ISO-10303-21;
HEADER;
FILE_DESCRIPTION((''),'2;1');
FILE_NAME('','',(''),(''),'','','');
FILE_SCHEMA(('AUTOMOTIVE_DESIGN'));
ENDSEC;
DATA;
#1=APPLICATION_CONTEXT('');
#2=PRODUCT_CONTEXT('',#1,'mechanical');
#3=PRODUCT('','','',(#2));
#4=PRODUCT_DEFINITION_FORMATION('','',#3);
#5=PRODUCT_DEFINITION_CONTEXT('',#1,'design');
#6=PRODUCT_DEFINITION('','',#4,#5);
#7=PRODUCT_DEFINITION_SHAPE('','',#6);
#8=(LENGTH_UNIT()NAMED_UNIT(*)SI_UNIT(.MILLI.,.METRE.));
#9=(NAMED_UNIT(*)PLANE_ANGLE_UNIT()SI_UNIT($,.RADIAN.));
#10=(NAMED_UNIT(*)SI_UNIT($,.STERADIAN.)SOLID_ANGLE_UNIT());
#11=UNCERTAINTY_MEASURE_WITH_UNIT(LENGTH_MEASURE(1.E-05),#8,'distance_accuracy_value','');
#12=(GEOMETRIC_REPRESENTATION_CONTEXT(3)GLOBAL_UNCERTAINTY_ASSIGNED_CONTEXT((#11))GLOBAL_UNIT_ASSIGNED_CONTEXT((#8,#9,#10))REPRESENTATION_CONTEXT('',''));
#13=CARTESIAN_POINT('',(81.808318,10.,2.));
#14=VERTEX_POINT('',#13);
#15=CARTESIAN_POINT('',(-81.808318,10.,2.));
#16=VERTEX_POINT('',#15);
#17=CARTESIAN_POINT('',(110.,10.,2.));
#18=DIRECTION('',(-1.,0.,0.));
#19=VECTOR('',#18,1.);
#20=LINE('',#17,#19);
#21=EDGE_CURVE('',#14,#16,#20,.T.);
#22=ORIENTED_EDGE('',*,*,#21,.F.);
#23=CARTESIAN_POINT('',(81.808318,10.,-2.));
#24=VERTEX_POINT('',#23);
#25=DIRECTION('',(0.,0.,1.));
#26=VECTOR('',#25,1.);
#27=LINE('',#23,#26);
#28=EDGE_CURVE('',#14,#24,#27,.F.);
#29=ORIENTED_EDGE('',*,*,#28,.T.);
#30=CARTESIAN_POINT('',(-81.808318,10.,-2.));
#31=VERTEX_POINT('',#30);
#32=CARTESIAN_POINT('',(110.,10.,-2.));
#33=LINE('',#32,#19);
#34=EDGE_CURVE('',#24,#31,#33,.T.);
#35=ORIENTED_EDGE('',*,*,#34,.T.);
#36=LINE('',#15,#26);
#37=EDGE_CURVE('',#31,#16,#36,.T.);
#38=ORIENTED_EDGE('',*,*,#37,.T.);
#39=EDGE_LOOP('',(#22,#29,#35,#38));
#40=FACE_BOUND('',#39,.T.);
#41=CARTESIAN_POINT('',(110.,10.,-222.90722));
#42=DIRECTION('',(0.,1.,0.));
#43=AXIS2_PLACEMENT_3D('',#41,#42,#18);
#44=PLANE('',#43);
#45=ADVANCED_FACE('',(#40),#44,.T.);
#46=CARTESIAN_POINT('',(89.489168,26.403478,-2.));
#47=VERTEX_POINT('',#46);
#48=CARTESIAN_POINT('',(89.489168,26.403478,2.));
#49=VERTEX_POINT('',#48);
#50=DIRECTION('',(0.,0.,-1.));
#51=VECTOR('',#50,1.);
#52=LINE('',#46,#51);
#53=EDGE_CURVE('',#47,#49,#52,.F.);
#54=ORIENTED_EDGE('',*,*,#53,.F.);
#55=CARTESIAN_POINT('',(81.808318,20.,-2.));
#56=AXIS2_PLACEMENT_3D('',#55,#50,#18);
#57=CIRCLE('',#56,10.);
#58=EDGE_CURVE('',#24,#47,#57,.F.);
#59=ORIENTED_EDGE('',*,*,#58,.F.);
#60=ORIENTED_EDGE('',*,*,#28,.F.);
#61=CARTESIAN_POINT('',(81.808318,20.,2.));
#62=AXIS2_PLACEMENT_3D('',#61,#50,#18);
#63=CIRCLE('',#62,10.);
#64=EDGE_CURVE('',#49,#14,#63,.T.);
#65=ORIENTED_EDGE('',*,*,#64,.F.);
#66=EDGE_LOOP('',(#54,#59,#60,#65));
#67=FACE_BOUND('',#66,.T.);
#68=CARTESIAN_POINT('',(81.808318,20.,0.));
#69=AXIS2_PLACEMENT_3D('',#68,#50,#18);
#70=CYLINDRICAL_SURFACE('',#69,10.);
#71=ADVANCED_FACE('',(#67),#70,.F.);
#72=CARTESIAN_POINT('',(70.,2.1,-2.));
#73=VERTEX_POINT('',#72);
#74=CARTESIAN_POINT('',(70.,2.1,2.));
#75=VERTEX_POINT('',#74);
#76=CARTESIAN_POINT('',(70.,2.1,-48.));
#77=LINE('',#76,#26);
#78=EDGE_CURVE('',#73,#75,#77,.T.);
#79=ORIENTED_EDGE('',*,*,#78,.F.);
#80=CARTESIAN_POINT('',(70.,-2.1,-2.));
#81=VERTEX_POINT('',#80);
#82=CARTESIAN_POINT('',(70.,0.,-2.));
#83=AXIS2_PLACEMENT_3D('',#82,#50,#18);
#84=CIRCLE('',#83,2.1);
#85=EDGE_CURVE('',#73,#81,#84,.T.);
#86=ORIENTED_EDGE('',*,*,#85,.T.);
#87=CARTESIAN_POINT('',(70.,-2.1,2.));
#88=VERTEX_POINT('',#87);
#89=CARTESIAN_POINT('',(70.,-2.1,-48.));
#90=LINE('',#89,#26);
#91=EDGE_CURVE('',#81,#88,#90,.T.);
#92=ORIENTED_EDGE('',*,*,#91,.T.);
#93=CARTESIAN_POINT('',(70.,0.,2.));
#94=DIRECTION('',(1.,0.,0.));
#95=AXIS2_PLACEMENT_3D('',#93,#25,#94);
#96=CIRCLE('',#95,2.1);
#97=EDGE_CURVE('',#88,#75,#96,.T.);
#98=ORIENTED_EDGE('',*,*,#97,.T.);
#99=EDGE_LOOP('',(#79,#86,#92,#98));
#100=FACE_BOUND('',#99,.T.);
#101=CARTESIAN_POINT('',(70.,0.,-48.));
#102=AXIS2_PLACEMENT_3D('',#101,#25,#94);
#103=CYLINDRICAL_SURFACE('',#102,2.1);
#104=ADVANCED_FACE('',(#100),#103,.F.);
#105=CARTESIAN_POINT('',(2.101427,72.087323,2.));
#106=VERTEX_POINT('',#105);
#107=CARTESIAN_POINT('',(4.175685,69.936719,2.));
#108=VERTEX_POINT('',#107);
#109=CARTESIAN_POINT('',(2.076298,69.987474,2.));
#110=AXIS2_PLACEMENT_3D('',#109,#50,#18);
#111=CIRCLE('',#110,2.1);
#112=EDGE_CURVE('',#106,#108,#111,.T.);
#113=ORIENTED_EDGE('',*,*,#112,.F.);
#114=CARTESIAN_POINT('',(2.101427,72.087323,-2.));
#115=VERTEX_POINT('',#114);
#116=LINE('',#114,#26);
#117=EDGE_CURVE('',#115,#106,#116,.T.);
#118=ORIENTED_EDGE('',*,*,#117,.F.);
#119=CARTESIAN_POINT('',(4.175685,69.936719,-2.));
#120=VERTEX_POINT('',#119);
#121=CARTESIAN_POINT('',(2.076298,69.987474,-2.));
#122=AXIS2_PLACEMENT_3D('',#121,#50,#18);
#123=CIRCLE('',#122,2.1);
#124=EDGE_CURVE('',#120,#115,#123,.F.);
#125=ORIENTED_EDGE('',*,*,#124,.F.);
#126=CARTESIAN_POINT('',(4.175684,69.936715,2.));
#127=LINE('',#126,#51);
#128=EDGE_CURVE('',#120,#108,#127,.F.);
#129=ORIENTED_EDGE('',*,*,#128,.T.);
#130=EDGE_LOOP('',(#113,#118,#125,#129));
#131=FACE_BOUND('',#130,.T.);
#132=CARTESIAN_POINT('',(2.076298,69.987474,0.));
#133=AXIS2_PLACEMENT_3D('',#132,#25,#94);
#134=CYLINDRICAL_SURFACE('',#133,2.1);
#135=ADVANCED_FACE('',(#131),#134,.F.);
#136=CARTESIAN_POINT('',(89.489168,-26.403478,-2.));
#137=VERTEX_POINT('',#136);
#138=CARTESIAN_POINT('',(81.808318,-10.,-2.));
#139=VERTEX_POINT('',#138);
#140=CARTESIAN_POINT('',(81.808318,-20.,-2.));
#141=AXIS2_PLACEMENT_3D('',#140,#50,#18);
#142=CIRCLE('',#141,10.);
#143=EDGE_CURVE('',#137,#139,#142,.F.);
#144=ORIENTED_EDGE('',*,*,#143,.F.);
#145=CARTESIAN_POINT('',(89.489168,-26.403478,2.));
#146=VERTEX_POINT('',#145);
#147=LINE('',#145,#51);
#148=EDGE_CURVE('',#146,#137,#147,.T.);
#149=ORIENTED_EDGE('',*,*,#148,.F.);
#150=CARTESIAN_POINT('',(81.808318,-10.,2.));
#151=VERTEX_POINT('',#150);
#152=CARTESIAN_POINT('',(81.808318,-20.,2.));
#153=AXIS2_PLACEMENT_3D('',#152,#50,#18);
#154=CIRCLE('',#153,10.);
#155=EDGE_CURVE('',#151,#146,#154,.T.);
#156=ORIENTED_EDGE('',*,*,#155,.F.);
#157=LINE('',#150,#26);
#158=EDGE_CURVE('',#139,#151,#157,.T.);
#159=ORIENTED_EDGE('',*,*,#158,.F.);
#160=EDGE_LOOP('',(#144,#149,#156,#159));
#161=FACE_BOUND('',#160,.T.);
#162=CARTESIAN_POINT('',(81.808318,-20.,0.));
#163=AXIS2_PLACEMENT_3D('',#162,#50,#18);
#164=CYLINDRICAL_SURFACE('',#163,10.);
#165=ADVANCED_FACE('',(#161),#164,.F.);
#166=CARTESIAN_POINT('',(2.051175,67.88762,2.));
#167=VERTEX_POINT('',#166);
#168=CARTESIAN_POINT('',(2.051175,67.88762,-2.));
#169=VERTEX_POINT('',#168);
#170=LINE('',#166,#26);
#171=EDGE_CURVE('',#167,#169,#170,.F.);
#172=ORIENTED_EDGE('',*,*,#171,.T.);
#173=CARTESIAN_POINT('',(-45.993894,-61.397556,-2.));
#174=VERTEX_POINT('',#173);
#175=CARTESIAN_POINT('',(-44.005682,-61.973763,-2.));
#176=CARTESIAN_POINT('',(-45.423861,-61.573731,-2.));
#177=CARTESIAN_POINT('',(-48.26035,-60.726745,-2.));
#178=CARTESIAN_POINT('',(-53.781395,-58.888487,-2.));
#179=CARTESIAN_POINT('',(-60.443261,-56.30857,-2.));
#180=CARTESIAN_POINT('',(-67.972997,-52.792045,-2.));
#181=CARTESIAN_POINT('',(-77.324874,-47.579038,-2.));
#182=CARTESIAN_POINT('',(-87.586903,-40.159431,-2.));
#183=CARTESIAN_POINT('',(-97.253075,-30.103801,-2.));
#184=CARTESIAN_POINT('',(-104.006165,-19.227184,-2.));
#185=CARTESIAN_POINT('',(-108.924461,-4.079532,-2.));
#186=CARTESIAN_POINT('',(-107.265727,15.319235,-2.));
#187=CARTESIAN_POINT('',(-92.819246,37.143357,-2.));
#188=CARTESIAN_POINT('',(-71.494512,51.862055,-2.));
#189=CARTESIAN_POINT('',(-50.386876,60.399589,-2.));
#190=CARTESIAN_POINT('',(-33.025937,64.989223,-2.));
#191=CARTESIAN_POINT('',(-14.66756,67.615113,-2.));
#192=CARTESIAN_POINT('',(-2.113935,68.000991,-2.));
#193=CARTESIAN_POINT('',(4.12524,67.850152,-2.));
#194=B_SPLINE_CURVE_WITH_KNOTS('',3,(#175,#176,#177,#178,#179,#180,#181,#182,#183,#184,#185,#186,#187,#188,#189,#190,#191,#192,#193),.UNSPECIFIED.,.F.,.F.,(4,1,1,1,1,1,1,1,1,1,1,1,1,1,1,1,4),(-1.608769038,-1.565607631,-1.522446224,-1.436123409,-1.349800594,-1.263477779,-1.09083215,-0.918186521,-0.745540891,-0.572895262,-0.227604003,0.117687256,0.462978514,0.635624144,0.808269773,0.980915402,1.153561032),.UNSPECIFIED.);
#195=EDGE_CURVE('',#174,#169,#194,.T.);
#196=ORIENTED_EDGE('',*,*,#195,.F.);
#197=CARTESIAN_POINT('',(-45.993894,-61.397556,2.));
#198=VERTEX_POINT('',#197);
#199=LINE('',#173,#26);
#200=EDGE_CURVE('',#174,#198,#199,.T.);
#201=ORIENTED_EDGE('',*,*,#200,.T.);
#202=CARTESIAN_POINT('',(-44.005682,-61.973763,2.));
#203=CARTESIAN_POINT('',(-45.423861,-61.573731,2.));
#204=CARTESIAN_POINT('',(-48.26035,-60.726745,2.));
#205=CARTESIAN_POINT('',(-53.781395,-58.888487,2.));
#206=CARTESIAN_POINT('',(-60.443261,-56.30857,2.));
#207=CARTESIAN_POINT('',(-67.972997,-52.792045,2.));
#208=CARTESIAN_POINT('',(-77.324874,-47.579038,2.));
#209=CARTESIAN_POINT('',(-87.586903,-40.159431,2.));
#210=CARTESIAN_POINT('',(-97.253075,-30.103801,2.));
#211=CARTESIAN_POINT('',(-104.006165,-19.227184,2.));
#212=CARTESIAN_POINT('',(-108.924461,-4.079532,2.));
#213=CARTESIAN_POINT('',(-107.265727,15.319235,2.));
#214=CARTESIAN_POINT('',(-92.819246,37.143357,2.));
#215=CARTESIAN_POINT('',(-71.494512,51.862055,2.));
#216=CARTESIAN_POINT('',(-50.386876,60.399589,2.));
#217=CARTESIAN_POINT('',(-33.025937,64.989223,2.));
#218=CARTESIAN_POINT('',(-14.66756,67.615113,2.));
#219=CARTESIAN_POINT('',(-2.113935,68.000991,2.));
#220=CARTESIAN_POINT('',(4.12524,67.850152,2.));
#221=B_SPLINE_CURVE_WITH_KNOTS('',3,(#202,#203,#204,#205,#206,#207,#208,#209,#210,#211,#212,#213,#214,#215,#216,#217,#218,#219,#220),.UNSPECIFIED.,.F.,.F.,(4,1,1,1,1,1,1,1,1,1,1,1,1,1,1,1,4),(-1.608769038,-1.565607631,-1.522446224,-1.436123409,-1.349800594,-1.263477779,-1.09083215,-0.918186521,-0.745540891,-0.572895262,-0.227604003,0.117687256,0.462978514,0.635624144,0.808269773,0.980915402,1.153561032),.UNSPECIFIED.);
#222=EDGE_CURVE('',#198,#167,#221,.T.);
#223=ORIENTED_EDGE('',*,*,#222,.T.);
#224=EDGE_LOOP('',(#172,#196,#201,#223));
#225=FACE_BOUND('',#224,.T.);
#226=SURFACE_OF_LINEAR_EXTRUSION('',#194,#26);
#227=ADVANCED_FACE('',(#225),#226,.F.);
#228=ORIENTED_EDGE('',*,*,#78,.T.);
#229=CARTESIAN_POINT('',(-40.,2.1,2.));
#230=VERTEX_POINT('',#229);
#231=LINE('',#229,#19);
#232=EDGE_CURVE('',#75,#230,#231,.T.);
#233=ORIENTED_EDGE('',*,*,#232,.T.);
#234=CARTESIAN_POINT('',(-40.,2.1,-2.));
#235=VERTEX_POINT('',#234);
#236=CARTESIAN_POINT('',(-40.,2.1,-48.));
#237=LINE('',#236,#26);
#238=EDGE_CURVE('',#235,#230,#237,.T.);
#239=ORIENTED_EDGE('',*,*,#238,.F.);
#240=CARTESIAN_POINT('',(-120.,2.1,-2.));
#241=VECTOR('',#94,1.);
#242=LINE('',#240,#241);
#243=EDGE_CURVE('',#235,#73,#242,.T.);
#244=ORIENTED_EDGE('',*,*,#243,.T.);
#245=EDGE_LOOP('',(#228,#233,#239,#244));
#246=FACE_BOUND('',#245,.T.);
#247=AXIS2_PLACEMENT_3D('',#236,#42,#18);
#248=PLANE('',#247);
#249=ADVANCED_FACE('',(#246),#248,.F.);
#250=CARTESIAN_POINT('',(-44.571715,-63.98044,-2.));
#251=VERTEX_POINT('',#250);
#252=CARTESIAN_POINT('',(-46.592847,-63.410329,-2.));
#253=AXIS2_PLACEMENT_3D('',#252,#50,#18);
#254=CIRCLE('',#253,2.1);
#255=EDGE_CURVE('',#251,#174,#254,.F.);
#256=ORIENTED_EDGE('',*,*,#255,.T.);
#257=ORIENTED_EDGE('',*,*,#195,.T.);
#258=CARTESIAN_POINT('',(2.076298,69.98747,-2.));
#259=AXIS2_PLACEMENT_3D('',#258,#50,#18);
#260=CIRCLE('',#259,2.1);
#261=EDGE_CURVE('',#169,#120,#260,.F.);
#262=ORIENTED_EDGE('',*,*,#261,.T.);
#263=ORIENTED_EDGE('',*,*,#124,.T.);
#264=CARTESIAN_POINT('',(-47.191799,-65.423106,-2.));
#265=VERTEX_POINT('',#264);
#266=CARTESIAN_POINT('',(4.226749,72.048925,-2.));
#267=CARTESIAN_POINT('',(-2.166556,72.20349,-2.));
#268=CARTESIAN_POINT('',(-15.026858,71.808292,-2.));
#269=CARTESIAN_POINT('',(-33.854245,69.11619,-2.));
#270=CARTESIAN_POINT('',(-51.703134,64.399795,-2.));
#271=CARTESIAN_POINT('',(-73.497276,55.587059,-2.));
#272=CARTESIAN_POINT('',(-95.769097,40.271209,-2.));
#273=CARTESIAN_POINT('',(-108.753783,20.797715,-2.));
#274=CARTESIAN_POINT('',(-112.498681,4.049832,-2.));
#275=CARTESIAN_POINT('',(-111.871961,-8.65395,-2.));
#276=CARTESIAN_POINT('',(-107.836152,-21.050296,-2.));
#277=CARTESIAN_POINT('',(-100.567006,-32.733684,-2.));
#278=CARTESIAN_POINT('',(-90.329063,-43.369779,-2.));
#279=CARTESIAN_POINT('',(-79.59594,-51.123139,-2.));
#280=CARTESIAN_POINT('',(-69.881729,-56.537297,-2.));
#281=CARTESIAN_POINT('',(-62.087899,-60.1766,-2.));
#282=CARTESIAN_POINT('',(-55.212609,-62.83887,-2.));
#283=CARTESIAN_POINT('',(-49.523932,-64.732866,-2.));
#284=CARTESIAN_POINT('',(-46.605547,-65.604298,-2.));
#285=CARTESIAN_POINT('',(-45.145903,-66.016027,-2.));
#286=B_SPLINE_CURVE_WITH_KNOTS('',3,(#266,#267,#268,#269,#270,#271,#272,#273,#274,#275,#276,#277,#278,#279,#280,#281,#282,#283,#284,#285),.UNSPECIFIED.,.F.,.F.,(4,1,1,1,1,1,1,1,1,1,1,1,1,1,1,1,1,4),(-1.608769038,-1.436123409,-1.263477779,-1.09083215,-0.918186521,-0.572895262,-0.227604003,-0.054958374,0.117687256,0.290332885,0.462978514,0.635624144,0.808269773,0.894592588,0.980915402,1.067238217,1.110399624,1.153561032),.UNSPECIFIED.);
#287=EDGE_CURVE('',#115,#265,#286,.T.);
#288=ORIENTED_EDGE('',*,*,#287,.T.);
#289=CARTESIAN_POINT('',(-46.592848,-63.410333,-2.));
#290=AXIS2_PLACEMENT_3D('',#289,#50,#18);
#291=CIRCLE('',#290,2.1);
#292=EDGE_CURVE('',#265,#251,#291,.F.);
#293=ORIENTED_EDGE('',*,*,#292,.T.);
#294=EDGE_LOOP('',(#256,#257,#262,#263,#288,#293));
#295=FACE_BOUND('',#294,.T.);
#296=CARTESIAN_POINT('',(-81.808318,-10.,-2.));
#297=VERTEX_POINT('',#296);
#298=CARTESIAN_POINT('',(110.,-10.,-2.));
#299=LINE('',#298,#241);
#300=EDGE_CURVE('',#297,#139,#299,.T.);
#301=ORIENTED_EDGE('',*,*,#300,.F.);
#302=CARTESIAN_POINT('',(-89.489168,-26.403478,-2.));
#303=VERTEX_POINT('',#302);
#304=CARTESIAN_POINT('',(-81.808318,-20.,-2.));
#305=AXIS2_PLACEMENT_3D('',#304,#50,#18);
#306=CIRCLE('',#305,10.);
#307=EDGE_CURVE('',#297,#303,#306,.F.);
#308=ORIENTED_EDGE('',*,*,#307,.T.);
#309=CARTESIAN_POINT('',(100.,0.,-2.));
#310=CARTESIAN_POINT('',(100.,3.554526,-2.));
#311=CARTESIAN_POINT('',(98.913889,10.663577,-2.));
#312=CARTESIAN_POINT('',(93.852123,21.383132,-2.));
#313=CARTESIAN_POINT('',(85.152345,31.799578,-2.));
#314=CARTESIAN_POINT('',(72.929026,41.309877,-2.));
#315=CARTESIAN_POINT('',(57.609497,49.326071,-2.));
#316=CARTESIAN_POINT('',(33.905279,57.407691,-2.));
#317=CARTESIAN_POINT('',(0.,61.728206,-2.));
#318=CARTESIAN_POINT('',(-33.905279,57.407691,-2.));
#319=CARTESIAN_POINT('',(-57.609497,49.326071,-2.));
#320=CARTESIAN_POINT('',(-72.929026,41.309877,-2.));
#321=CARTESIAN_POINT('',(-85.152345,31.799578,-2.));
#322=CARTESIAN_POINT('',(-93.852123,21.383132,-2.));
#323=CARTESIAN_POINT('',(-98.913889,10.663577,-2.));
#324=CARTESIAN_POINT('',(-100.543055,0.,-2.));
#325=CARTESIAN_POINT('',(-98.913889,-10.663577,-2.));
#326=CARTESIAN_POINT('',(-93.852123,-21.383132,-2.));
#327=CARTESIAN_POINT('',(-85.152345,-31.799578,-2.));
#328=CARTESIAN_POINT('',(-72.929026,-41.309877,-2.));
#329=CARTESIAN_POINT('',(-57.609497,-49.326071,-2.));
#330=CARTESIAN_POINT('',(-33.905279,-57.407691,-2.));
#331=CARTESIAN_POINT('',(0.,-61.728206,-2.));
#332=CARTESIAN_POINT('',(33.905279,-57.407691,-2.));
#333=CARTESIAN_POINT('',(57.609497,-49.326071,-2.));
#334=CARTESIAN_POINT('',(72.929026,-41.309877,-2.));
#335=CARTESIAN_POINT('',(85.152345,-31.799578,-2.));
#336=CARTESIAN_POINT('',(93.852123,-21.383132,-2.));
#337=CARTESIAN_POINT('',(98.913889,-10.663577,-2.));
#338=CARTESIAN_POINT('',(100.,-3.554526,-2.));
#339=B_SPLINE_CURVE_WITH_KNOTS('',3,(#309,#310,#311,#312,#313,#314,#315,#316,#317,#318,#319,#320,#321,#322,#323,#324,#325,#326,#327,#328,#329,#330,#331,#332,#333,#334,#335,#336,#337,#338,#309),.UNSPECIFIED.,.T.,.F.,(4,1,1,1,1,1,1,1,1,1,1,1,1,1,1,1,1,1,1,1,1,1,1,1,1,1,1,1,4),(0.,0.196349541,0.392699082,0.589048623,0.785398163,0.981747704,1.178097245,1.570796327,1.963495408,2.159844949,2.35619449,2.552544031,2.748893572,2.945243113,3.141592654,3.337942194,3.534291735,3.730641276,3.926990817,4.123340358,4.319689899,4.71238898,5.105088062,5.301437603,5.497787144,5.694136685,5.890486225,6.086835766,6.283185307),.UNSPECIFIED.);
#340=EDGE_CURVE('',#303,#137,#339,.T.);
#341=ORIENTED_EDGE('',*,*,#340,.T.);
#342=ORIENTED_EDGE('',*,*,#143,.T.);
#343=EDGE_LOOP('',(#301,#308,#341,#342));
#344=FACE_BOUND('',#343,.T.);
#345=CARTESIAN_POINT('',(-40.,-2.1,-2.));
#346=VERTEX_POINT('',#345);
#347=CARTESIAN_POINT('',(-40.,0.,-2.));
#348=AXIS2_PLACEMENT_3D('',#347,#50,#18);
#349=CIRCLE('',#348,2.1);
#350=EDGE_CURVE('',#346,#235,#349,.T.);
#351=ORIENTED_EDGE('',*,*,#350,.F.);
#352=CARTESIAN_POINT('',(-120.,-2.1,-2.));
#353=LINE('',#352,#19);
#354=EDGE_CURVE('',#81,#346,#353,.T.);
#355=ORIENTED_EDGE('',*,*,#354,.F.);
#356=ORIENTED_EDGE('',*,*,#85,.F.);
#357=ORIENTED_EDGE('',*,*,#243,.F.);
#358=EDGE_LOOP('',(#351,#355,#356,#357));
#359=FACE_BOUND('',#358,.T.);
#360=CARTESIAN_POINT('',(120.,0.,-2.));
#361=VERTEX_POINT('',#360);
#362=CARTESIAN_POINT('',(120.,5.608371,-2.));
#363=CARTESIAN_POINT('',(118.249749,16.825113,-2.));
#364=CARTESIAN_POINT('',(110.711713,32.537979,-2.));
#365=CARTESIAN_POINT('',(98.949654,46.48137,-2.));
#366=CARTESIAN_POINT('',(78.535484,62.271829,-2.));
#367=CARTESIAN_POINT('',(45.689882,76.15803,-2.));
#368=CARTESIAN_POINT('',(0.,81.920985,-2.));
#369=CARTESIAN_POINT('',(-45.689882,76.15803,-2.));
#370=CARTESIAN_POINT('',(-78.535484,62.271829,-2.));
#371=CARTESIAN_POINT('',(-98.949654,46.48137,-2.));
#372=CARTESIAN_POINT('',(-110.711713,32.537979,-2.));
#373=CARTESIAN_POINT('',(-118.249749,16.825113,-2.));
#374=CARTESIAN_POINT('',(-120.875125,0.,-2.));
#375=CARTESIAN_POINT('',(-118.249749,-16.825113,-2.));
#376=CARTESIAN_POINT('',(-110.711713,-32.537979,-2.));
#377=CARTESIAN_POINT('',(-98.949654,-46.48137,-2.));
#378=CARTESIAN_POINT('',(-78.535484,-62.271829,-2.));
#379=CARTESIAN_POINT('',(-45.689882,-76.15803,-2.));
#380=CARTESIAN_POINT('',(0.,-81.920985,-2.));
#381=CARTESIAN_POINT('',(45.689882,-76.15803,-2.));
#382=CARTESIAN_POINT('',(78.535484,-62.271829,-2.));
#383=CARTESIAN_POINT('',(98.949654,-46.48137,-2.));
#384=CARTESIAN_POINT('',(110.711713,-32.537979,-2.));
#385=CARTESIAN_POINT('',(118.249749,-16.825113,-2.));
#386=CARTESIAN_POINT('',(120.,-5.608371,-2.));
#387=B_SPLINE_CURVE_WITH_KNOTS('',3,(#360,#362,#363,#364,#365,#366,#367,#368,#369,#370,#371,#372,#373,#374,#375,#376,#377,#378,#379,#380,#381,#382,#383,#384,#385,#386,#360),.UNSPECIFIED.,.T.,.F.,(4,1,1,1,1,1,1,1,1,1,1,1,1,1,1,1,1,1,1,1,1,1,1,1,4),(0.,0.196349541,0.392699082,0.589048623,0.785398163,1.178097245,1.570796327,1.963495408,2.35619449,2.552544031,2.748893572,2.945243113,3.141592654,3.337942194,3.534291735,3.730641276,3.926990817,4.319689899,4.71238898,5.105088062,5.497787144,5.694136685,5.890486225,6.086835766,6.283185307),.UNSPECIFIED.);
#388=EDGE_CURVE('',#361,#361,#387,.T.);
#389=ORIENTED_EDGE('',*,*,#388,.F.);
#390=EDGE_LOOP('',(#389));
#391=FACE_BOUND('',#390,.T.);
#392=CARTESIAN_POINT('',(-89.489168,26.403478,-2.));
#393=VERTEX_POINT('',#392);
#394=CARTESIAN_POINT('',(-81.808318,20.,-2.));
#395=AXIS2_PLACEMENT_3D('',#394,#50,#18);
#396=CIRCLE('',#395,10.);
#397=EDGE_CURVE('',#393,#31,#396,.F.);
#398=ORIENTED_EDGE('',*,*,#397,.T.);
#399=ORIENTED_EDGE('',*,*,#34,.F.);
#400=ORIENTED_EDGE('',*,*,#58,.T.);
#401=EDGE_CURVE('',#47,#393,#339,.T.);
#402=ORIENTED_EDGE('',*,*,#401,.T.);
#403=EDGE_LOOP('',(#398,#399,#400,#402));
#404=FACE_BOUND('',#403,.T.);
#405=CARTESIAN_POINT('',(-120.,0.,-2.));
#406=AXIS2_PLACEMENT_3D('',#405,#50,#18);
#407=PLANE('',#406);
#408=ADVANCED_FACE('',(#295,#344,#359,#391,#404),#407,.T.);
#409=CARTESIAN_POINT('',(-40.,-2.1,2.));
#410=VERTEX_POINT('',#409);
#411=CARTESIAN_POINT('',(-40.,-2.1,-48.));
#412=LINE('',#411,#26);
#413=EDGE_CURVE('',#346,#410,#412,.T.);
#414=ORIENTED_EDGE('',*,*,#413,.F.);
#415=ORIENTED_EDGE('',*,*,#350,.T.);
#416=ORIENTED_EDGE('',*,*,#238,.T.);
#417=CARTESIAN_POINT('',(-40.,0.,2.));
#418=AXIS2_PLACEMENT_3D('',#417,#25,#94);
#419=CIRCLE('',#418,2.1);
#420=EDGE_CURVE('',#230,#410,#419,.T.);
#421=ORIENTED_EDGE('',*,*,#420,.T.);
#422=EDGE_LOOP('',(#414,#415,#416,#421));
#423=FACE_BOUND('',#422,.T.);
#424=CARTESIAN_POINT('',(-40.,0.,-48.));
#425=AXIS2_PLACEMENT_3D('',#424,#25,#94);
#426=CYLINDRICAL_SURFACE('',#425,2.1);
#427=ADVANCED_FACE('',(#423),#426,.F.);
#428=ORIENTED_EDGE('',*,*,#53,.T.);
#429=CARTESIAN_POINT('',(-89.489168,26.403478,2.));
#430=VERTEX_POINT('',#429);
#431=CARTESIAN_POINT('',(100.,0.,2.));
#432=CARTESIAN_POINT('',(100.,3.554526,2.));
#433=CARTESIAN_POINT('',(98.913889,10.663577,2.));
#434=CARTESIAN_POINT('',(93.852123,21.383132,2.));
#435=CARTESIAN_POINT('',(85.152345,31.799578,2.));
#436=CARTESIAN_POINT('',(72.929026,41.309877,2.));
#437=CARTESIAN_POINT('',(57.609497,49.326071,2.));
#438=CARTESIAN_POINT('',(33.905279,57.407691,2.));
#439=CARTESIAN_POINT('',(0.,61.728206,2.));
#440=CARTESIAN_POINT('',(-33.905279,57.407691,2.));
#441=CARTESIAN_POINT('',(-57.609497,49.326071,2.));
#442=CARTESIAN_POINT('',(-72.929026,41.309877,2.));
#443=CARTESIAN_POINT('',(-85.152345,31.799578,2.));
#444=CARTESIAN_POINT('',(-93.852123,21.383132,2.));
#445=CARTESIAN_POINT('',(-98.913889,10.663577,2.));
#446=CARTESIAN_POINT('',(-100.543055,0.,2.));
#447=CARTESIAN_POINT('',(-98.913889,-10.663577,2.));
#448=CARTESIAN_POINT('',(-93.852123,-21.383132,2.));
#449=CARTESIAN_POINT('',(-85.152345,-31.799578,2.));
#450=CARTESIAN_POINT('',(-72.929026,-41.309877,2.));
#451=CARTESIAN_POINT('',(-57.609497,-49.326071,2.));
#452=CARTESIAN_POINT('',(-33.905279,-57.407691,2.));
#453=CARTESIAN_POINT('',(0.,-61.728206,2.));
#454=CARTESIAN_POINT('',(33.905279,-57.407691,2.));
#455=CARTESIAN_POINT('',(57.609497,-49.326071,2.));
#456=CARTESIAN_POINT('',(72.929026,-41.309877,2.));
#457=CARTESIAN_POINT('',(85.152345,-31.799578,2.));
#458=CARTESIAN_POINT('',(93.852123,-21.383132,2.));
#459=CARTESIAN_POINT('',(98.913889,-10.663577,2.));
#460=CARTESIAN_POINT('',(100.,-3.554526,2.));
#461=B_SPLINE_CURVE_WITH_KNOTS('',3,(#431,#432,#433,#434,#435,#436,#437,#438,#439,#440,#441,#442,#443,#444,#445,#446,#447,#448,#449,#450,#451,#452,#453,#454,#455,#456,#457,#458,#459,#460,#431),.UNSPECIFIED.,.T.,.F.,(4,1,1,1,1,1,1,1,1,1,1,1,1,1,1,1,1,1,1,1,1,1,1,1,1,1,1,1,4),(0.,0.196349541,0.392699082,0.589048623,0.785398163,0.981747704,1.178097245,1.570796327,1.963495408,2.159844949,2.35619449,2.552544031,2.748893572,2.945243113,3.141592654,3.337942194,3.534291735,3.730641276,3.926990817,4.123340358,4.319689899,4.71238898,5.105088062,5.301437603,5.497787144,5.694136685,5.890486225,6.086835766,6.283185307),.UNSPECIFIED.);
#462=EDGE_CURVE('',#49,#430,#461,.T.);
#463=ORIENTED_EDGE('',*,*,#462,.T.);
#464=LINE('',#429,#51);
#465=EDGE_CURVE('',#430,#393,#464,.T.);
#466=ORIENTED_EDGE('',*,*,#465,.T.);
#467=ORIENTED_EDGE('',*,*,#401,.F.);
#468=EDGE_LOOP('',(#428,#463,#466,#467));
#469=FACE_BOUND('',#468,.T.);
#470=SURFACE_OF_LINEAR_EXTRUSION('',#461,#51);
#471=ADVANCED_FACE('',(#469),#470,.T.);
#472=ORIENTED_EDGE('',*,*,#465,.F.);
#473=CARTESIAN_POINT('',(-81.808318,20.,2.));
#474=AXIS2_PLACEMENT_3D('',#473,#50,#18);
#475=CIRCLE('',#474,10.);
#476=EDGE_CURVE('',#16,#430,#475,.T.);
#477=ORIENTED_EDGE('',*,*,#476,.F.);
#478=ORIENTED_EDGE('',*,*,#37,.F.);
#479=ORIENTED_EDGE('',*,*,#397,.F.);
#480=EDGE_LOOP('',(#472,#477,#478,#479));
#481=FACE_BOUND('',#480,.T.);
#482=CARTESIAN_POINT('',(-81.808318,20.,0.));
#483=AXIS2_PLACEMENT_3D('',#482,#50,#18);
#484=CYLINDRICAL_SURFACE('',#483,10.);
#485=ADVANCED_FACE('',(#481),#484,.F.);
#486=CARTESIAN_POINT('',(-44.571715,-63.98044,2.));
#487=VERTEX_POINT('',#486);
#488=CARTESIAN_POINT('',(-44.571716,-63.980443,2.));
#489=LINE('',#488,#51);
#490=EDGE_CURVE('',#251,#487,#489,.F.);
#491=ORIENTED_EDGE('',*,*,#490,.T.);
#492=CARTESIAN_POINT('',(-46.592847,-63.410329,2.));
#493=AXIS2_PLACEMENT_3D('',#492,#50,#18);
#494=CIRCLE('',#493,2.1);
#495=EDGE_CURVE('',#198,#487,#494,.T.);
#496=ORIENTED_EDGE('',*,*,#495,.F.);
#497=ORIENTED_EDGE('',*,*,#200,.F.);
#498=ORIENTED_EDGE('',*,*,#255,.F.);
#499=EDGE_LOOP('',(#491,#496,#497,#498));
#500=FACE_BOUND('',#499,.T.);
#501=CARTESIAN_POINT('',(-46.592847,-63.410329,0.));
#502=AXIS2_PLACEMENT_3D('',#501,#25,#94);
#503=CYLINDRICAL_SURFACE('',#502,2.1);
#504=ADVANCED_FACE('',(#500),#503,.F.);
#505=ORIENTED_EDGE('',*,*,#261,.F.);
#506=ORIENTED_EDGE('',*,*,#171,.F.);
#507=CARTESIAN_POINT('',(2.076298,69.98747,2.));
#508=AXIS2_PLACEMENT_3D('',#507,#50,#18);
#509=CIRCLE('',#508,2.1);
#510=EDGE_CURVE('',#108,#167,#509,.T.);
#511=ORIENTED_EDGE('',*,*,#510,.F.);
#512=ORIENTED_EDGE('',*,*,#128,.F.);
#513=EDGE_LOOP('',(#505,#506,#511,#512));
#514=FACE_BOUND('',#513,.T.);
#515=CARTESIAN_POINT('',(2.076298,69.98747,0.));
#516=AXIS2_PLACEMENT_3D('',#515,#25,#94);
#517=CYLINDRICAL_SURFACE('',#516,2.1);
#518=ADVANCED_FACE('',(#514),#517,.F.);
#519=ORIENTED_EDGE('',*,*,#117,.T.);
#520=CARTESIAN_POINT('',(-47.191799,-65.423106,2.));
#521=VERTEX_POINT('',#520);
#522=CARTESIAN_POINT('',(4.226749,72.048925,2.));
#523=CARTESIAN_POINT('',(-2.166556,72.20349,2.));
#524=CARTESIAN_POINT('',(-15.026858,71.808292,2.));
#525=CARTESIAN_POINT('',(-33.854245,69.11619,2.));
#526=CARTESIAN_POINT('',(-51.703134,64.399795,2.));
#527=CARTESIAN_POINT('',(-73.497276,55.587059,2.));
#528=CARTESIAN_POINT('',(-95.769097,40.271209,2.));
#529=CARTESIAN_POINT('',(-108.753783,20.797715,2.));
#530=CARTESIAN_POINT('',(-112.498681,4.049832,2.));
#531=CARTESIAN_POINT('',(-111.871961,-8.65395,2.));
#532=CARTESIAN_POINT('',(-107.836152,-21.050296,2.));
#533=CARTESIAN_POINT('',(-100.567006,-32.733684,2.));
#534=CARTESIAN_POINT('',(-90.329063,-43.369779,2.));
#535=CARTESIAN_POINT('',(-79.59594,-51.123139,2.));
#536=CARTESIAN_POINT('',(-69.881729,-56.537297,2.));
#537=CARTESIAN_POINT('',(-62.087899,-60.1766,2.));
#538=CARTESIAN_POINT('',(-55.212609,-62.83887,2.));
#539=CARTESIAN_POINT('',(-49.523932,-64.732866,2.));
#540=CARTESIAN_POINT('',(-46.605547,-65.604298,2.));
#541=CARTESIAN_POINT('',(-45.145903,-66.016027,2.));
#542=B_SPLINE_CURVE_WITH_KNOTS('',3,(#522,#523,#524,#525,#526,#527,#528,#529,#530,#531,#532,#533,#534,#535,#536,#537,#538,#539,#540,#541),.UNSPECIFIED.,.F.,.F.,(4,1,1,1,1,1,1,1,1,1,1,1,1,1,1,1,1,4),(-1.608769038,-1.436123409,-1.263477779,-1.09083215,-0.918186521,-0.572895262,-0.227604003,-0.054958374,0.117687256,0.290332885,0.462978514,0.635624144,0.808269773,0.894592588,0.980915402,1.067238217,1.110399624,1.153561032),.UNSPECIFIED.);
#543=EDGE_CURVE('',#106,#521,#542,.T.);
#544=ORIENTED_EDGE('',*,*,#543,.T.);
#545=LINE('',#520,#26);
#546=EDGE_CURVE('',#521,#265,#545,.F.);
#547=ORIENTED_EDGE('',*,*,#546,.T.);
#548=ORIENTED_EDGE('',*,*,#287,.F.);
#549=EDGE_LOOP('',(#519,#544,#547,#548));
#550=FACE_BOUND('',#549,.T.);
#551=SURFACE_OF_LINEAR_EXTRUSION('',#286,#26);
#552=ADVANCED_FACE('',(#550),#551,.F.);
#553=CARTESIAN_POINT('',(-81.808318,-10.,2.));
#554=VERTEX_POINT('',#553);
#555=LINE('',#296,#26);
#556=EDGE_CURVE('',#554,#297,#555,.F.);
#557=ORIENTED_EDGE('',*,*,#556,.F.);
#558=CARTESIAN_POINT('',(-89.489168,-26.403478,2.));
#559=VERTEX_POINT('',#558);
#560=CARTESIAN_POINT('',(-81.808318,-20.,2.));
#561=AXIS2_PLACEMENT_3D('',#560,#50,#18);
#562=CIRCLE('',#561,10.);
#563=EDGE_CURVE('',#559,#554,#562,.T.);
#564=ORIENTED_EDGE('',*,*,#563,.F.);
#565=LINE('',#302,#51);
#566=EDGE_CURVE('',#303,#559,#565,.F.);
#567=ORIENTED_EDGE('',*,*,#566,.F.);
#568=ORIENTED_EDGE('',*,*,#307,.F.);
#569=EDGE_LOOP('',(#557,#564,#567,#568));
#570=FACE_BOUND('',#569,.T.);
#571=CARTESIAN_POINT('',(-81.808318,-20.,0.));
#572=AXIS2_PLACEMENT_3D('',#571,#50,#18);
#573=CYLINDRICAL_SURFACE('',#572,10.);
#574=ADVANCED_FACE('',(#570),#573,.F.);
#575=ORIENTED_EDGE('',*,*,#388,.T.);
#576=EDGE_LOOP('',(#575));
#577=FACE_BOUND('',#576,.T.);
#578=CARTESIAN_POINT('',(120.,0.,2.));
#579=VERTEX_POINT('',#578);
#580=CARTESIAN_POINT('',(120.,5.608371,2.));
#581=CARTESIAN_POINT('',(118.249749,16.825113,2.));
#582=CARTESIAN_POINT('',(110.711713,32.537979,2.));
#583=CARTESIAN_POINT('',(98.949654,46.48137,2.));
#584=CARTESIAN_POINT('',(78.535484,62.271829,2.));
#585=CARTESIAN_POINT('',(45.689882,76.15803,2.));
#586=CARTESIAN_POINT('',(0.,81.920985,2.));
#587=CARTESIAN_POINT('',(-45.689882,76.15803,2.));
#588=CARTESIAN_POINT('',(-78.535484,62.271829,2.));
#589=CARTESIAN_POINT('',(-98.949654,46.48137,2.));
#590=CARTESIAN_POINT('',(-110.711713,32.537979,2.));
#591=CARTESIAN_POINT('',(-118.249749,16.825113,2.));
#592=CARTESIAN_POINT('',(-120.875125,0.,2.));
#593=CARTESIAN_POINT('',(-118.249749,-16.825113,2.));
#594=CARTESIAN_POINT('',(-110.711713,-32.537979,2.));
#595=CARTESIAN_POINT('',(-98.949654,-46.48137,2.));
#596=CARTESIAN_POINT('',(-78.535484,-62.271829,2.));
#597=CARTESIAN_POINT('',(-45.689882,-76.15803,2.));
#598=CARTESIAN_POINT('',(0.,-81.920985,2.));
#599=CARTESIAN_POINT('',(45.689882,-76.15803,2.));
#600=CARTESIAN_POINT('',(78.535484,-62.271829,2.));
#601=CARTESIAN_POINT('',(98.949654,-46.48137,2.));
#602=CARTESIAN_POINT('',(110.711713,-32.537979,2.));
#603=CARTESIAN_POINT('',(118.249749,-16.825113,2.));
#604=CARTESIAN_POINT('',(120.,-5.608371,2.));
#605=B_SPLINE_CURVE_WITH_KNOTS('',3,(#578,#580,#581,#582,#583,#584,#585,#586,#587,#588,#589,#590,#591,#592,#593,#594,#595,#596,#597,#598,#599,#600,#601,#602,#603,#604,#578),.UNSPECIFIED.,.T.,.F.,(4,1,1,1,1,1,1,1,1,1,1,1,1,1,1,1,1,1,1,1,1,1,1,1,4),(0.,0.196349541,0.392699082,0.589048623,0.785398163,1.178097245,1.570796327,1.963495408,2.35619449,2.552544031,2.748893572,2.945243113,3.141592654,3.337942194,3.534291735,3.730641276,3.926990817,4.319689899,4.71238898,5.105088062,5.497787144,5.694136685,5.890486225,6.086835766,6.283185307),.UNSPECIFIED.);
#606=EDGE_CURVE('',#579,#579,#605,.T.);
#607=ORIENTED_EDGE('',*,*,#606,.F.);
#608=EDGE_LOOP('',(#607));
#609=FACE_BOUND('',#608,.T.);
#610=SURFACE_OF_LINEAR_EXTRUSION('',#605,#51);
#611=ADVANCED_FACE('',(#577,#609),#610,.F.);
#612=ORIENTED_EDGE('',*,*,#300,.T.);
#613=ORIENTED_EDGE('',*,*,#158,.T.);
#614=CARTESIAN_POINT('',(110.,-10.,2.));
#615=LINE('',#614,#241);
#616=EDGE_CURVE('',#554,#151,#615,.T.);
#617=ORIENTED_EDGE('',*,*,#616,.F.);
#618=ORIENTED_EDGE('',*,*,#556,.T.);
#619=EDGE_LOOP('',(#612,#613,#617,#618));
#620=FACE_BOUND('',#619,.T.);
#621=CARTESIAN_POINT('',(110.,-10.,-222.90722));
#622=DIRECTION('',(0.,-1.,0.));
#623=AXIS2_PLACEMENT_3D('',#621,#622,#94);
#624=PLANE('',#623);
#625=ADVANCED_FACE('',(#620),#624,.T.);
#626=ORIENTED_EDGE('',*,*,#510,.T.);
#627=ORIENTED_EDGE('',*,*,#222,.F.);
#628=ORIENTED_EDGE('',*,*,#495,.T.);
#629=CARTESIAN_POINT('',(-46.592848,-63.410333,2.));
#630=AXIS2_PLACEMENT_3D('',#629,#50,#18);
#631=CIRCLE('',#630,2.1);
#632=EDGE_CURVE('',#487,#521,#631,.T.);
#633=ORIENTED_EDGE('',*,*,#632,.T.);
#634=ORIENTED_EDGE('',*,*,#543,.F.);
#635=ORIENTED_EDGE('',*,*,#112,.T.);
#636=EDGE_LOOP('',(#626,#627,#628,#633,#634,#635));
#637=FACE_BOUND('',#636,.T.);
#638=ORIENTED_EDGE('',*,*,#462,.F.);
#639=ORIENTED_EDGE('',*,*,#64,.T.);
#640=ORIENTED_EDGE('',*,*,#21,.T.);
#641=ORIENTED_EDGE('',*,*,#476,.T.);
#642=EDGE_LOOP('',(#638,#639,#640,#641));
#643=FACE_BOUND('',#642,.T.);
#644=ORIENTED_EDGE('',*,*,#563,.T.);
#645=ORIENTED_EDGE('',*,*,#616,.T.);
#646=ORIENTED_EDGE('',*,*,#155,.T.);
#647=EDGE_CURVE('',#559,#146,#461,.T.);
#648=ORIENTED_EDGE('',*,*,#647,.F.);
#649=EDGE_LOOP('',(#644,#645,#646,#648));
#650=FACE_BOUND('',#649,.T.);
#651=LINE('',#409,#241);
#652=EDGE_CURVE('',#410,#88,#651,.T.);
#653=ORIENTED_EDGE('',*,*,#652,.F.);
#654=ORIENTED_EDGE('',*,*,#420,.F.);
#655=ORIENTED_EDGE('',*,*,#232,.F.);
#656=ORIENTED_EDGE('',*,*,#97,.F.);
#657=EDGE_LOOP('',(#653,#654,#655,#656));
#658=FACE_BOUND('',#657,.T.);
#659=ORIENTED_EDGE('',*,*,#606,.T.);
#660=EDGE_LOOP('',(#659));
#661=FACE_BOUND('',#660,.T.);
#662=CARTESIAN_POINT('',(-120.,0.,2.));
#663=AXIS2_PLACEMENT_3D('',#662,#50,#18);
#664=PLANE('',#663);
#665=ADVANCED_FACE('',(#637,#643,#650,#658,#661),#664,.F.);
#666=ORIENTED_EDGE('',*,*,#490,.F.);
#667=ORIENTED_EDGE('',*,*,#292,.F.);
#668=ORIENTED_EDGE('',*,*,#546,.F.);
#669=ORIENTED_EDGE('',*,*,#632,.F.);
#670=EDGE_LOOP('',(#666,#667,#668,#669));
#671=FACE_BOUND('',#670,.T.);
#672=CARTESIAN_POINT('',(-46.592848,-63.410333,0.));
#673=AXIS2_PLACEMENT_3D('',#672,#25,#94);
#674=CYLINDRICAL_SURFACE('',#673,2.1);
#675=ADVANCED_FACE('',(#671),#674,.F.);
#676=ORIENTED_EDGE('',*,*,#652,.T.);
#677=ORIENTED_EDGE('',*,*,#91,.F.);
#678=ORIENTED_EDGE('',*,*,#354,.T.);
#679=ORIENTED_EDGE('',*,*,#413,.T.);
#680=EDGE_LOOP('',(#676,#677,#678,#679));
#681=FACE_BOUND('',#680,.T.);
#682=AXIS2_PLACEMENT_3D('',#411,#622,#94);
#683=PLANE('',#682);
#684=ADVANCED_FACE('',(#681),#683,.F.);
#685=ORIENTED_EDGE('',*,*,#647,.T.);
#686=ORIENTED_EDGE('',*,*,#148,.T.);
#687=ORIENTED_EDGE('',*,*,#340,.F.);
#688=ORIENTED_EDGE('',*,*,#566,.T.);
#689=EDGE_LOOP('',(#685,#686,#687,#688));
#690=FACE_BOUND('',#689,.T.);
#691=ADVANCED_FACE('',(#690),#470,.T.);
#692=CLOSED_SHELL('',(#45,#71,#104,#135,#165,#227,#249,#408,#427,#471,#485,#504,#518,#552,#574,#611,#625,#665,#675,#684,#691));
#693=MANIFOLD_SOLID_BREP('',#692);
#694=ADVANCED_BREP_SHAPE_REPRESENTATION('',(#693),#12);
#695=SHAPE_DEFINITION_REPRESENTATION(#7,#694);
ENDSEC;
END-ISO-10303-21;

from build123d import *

# Parameters (mm, degrees)
BOSS_EXTRUDE3_START = -2
BOSS_EXTRUDE3_DEPTH = 4
SKETCH8_W           = 220
SKETCH8_H           = 20
BOSS_EXTRUDE4_DEPTH = 4
FILLET1_R           = 10
CUT_EXTRUDE2_DEPTH  = 145.277510516
CUT_EXTRUDE3_DEPTH  = 50
FILLET2_R           = 2.1


# Read off the part's stored shape, not the designer's step: Boss-Extrude3
with BuildPart() as part:
    # Boss-Extrude3 outline → Boss-Extrude3 (new body)
    with BuildSketch(Plane.XY.offset(BOSS_EXTRUDE3_START)):
        with BuildLine():
            add(Edge.make_bspline(
                [(120, 0), (120, 5.60837091), (118.249749071, 16.825112731), (110.711713348, 32.537979104), (98.949654389, 46.48137048), (78.535484317, 62.27182897), (45.689881985, 76.15803027), (0, 81.920984865), (-45.689881985, 76.15803027), (-78.535484317, 62.27182897), (-98.949654389, 46.48137048), (-110.711713348, 32.537979104), (-118.249749071, 16.825112731), (-120.875125464, 0), (-118.249749071, -16.825112731), (-110.711713348, -32.537979104), (-98.949654389, -46.48137048), (-78.535484317, -62.27182897), (-45.689881985, -76.15803027), (0, -81.920984865), (45.689881985, -76.15803027), (78.535484317, -62.27182897), (98.949654389, -46.48137048), (110.711713348, -32.537979104), (118.249749071, -16.825112731), (120, -5.60837091), (120, 0)],
                knots=[0, 0, 0, 0, 0.196349541, 0.392699082, 0.589048623, 0.785398163, 1.178097245, 1.570796327, 1.963495408, 2.35619449, 2.552544031, 2.748893572, 2.945243113, 3.141592654, 3.337942194, 3.534291735, 3.730641276, 3.926990817, 4.319689899, 4.71238898, 5.105088062, 5.497787144, 5.694136685, 5.890486225, 6.086835766, 6.283185307, 6.283185307, 6.283185307, 6.283185307], degree=3))
        make_face()
        with BuildLine():
            add(Edge.make_bspline(
                [(100, 0), (100, 3.554525689), (98.913889193, 10.663577066), (93.852122858, 21.383132202), (85.152345438, 31.799577686), (72.92902589, 41.309877418), (57.609497053, 49.326071478), (33.905278859, 57.40769091), (0, 61.72820606), (-33.905278859, 57.40769091), (-57.609497053, 49.326071478), (-72.92902589, 41.309877418), (-85.152345438, 31.799577686), (-93.852122858, 21.383132202), (-98.913889193, 10.663577066), (-100.543055403, 0), (-98.913889193, -10.663577066), (-93.852122858, -21.383132202), (-85.152345438, -31.799577686), (-72.92902589, -41.309877418), (-57.609497053, -49.326071478), (-33.905278859, -57.40769091), (0, -61.72820606), (33.905278859, -57.40769091), (57.609497053, -49.326071478), (72.92902589, -41.309877418), (85.152345438, -31.799577686), (93.852122858, -21.383132202), (98.913889193, -10.663577066), (100, -3.554525689), (100, 0)],
                knots=[0, 0, 0, 0, 0.196349541, 0.392699082, 0.589048623, 0.785398163, 0.981747704, 1.178097245, 1.570796327, 1.963495408, 2.159844949, 2.35619449, 2.552544031, 2.748893572, 2.945243113, 3.141592654, 3.337942194, 3.534291735, 3.730641276, 3.926990817, 4.123340358, 4.319689899, 4.71238898, 5.105088062, 5.301437603, 5.497787144, 5.694136685, 5.890486225, 6.086835766, 6.283185307, 6.283185307, 6.283185307, 6.283185307], degree=3))
        make_face(mode=Mode.SUBTRACT)
    extrude(amount=BOSS_EXTRUDE3_DEPTH)

    # Sketch8 → Boss-Extrude4 (add)
    with BuildSketch(Plane.XY.offset(2)):
        Rectangle(SKETCH8_W, SKETCH8_H)
    extrude(amount=-BOSS_EXTRUDE4_DEPTH)

    # Fillet1
    fillet1_edges = [part.edges().sort_by_distance(p)[0] for p in [
        (98.545586841, 10, 0),
        (-98.545586841, 10, 0),
        (-98.545586841, -10, 0),
        (98.545586841, -10, 0),
    ]]
    fillet(fillet1_edges, radius=FILLET1_R)

    # Sketch5 → Cut-Extrude2 (cut, through all)
    with BuildSketch(Plane.XY.offset(2)):
        with BuildLine():
            Line((-44.005681824, -61.973763217), (-45.14590297, -66.016026907))
            add(Edge.make_bspline(
                [(-45.14590297, -66.016026907), (-46.605546928, -65.604297976), (-49.523931619, -64.732865694), (-55.212609053, -62.838870119), (-62.087898717, -60.176599945), (-69.881728521, -56.537296626), (-79.595939983, -51.123139145), (-90.329063365, -43.369779285), (-100.567006327, -32.733684024), (-107.836151502, -21.050296353), (-111.871960539, -8.653949625), (-112.498680524, 4.049832352), (-108.753782537, 20.797714724), (-95.769096692, 40.27120857), (-73.497276322, 55.587058546), (-51.70313448, 64.399794748), (-33.854244542, 69.116190381), (-15.026858359, 71.808292394), (-2.16655573, 72.203490206), (4.226749435, 72.048925188)],
                knots=[-1.608769038, -1.608769038, -1.608769038, -1.608769038, -1.565607631, -1.522446224, -1.436123409, -1.349800594, -1.263477779, -1.09083215, -0.918186521, -0.745540891, -0.572895262, -0.400249633, -0.227604003, 0.117687256, 0.462978514, 0.635624144, 0.808269773, 0.980915402, 1.153561032, 1.153561032, 1.153561032, 1.153561032], degree=3))
            Line((4.226749435, 72.048925188), (4.125239586, 67.850152063))
            add(Edge.make_bspline(
                [(-44.005681824, -61.973763217), (-45.423860667, -61.573730555), (-48.260349906, -60.726745284), (-53.781395272, -58.888487114), (-60.443261108, -56.308569602), (-67.972996881, -52.792045101), (-77.324873917, -47.579038076), (-87.586903305, -40.159431381), (-97.253075092, -30.103801292), (-104.006165258, -19.22718442), (-108.924460756, -4.079531964), (-107.265727294, 15.319235385), (-92.81924619, 37.143357418), (-71.494511867, 51.862054935), (-50.386876234, 60.399589228), (-33.025936974, 64.989222932), (-14.667559956, 67.615112581), (-2.113934546, 68.000990798), (4.125239586, 67.850152063)],
                knots=[-1.608769038, -1.608769038, -1.608769038, -1.608769038, -1.565607631, -1.522446224, -1.436123409, -1.349800594, -1.263477779, -1.09083215, -0.918186521, -0.745540891, -0.572895262, -0.227604003, 0.117687256, 0.462978514, 0.635624144, 0.808269773, 0.980915402, 1.153561032, 1.153561032, 1.153561032, 1.153561032], degree=3))
        make_face()
    extrude(amount=-CUT_EXTRUDE2_DEPTH, mode=Mode.SUBTRACT)

    # Sketch9 → Cut-Extrude3 (cut)
    with BuildSketch(Plane.XY.offset(2)):
        with BuildLine():
            Line((-40, 2.1), (70, 2.1))
            ThreePointArc((70, 2.1), (72.1, 0), (70, -2.1))
            Line((70, -2.1), (-40, -2.1))
            ThreePointArc((-40, -2.1), (-42.1, 0), (-40, 2.1))
        make_face()
    extrude(amount=-CUT_EXTRUDE3_DEPTH, mode=Mode.SUBTRACT)

    # Fillet2
    fillet2_edges = [part.edges().sort_by_distance(p)[0] for p in [
        (-44.005681824, -61.973763217, 0),
        (-45.14590297, -66.016026907, 0),
        (4.226749435, 72.048925188, 0),
        (4.125239586, 67.850152063, 0),
    ]]
    fillet(fillet2_edges, radius=FILLET2_R - 0.0001)  # a hair under: the kernel refuses the full size


solid = part.part
